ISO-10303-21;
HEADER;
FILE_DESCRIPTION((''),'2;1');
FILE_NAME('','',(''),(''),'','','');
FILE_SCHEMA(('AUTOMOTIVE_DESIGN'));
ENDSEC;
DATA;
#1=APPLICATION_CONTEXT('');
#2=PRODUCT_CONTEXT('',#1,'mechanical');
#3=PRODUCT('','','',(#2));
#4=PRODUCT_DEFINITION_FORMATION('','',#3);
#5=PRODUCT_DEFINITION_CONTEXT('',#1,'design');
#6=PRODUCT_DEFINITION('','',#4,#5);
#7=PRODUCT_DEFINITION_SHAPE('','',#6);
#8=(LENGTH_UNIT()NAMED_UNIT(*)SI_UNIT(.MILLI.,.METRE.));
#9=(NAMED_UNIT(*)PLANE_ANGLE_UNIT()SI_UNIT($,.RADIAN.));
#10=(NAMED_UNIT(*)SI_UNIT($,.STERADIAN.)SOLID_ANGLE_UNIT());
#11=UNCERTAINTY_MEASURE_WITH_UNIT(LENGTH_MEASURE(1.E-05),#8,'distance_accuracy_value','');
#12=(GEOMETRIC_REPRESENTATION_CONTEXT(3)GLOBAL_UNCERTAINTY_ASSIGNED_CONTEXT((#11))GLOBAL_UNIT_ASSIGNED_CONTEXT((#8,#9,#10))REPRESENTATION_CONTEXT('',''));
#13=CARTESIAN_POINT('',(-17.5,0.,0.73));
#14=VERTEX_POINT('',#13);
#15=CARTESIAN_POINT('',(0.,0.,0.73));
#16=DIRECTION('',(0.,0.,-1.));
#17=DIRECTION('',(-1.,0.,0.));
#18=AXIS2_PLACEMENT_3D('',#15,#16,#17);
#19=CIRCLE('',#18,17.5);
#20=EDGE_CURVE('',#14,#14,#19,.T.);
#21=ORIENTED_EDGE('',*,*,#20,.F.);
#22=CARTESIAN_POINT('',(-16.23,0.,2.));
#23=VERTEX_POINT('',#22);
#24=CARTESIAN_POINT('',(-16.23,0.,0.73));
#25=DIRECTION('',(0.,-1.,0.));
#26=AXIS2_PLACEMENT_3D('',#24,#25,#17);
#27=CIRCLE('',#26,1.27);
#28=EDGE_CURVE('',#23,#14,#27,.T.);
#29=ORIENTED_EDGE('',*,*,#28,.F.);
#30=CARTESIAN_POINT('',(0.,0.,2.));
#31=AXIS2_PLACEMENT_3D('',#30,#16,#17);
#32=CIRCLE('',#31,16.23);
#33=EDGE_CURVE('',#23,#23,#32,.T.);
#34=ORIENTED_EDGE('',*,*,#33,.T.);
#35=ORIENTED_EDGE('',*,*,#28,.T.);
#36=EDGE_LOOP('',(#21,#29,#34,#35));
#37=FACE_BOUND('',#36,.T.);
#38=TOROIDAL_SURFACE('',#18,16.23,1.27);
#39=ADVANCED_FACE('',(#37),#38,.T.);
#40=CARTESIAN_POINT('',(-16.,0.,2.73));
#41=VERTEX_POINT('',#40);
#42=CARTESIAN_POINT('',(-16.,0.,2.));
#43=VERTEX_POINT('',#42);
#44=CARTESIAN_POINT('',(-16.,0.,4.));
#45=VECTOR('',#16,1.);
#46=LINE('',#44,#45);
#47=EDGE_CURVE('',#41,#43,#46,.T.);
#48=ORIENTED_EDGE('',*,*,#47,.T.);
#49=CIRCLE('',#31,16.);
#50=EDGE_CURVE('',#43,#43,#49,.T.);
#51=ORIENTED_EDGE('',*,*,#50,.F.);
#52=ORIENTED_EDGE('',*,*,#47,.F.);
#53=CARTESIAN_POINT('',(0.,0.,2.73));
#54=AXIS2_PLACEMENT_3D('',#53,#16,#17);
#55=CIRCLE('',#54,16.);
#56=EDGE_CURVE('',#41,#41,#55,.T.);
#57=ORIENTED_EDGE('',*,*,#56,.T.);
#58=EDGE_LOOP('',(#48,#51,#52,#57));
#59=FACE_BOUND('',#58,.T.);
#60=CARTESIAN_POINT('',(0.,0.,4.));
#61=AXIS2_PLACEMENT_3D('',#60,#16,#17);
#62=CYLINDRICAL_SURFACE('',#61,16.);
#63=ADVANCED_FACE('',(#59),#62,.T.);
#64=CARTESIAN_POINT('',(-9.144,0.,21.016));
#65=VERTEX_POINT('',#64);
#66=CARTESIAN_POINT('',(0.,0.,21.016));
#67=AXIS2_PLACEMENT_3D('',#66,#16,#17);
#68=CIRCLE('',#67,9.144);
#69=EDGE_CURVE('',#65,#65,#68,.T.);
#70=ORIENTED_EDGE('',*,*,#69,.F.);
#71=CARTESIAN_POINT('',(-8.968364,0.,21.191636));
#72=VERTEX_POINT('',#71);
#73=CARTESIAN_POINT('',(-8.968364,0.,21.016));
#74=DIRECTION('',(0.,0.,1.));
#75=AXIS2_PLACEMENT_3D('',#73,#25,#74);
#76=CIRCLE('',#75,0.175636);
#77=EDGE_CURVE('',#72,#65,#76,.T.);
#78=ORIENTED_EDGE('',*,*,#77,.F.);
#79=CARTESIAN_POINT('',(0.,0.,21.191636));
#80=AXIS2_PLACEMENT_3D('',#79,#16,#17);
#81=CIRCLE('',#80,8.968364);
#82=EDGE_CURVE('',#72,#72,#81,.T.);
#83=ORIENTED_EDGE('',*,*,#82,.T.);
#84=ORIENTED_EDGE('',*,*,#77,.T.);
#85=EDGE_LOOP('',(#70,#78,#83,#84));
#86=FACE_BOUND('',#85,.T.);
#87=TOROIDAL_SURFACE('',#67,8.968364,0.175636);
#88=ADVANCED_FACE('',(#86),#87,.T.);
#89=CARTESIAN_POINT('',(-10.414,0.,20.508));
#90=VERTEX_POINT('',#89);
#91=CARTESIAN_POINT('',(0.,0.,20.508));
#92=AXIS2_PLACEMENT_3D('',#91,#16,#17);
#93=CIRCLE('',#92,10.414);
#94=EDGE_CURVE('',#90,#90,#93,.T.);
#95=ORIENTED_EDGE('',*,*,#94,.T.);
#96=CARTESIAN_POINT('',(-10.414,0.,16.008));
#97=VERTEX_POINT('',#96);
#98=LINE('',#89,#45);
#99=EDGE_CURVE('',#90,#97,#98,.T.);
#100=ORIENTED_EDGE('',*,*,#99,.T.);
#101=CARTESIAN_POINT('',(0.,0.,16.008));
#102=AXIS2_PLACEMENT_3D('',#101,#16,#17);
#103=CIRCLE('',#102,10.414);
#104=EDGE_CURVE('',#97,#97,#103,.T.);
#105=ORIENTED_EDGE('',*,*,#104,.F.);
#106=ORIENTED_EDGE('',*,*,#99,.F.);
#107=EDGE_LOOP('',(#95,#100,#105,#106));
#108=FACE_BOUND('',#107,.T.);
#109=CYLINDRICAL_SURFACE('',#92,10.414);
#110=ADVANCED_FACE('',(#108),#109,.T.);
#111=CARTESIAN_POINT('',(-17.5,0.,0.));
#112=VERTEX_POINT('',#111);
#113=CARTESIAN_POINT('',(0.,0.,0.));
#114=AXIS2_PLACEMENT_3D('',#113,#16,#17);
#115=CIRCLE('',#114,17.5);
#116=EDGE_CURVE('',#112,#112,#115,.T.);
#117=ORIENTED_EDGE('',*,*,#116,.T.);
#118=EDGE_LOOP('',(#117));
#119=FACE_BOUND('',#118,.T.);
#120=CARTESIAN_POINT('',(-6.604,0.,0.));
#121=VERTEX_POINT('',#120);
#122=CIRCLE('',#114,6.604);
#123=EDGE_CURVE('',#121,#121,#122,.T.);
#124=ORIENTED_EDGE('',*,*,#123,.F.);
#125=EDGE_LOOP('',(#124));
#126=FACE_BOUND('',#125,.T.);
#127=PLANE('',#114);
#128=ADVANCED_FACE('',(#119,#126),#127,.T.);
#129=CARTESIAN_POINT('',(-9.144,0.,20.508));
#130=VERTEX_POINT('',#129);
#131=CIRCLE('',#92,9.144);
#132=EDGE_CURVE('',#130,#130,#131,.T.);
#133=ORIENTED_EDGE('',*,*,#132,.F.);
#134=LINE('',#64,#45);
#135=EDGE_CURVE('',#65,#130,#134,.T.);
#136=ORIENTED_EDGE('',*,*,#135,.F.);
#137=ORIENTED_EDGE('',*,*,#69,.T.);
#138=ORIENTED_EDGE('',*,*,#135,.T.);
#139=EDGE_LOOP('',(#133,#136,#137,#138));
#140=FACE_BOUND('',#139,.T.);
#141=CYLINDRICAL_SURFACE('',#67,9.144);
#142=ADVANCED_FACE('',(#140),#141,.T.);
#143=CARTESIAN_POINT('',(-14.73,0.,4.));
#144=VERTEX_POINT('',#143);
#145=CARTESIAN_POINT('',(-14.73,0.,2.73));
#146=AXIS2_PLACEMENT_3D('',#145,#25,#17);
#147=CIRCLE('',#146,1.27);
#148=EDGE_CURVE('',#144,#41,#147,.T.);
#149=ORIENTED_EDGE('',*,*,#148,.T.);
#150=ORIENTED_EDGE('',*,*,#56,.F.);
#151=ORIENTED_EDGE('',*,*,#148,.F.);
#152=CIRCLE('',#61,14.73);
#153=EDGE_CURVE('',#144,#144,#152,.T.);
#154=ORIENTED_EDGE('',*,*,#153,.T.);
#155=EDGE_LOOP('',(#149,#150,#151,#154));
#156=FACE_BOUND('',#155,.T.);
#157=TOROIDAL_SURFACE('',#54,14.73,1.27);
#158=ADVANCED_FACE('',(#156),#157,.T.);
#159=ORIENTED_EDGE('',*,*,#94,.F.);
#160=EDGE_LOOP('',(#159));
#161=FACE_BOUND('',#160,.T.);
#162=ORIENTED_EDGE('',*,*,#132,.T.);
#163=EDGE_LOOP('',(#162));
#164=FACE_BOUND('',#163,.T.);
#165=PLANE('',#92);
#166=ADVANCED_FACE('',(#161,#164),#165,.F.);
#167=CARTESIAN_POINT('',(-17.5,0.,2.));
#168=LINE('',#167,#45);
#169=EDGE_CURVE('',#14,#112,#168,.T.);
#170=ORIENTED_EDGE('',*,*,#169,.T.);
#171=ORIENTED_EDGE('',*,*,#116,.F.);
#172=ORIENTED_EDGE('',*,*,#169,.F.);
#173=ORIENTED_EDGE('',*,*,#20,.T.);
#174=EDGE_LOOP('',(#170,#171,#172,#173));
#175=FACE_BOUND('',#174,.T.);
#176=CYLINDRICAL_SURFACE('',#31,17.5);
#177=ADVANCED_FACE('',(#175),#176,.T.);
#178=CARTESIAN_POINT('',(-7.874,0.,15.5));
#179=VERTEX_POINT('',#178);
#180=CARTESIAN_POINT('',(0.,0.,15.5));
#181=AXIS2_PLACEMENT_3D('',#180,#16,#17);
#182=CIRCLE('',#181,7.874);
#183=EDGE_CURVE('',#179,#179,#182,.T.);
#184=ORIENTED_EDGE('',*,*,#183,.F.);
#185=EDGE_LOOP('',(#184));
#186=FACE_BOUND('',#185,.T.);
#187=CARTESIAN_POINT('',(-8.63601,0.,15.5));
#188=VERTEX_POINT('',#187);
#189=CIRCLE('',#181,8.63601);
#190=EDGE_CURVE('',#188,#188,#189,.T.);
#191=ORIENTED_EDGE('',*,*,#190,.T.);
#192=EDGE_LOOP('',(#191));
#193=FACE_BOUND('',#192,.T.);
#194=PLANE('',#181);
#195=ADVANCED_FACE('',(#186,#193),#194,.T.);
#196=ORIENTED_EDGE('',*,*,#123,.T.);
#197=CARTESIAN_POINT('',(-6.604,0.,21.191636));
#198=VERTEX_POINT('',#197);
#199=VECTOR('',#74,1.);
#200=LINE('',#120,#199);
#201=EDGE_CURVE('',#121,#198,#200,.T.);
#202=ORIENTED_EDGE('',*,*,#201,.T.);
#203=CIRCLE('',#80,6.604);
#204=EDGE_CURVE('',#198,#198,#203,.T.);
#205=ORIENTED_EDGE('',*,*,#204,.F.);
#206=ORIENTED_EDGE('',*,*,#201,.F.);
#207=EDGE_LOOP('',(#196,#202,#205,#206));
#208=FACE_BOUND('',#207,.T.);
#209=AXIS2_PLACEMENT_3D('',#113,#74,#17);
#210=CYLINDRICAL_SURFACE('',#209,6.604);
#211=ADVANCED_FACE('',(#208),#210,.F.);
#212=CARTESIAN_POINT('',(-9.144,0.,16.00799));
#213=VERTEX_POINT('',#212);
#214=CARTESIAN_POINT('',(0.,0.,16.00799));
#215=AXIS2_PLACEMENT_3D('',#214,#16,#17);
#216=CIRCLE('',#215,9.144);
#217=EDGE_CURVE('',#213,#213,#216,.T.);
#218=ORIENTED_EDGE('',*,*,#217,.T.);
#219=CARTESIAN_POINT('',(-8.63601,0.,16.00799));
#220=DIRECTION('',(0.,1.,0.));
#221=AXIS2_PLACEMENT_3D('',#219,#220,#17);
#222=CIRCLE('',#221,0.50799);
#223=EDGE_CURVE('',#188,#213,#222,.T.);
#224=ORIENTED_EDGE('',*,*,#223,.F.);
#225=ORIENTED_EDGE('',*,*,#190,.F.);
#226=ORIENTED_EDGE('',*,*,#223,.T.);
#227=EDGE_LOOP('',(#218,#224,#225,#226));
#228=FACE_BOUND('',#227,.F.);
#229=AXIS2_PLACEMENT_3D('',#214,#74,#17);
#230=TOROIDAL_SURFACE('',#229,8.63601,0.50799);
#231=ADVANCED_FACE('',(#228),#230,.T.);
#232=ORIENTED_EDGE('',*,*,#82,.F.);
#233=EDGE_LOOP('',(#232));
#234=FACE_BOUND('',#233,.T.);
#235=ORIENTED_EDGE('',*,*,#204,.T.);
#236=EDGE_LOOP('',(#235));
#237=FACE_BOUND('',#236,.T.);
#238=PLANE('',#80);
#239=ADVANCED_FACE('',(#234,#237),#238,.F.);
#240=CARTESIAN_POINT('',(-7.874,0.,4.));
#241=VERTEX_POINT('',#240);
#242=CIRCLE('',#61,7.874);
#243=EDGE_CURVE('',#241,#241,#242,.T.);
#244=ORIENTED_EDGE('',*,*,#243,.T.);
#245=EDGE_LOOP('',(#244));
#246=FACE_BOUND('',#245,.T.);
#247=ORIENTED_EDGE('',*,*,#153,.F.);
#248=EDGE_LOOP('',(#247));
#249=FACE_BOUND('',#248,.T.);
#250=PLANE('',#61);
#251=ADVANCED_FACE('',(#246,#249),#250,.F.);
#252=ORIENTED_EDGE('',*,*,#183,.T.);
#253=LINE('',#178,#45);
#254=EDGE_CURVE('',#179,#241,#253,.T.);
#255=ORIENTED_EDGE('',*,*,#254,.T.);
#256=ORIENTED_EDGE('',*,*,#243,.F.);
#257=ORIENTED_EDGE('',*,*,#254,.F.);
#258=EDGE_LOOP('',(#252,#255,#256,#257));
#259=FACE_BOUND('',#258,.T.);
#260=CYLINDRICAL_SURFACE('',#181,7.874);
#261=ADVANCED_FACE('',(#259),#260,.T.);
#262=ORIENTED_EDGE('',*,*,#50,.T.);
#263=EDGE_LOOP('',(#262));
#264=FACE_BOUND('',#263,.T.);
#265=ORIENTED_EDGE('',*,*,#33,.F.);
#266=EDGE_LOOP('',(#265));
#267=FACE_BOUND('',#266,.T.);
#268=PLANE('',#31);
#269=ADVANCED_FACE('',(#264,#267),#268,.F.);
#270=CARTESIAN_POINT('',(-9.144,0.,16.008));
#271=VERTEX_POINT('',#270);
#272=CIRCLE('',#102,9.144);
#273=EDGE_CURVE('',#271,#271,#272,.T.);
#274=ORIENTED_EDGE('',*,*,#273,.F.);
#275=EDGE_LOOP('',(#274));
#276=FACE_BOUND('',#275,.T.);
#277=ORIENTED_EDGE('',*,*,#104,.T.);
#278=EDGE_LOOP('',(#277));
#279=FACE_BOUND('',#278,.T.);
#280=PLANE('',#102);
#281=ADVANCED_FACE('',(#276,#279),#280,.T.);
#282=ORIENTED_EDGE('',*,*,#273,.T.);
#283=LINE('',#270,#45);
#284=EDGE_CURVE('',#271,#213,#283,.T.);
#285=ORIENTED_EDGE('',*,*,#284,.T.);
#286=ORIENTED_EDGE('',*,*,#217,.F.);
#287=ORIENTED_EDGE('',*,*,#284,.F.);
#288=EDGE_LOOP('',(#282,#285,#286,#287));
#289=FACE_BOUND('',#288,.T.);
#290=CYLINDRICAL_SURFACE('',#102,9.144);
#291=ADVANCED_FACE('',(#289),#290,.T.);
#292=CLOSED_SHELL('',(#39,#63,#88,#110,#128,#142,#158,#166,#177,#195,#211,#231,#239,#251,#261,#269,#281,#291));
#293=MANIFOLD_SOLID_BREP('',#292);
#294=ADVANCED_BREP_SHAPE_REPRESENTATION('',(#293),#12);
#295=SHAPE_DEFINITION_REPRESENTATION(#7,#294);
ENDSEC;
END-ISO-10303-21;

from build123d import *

# Parameters (mm, degrees)
F2_R = 1.27
F3_R = 0.50799


# Not quite as in the source:
# - a fillet or chamfer is up to 0.001 mm smaller than in the source, because OpenCascade refuses the exact size


with BuildPart() as f1:
    # F0 (on Front) → F1 (revolve)
    with BuildSketch(Plane.XZ):
        with BuildLine():
            Line((-17.5, 0), (-6.604, 0))
            Line((-6.604, 0), (-6.604, 21.1916357695))
            Line((-6.604, 21.1916357695), (-8.9683642305, 21.1916357695))
            ThreePointArc((-8.9683642305, 21.1916357695), (-9.0925574741, 21.1401932437), (-9.144, 21.016))
            Line((-9.144, 21.016), (-9.144, 20.508))
            Line((-9.144, 20.508), (-10.414, 20.508))
            Line((-10.414, 20.508), (-10.414, 16.008))
            Line((-10.414, 16.008), (-9.144, 16.008))
            Line((-9.144, 16.008), (-9.144, 15.5))
            Line((-9.144, 15.5), (-7.874, 15.5))
            Line((-7.874, 15.5), (-7.874, 4))
            Line((-7.874, 4), (-16, 4))
            Line((-16, 4), (-16, 2))
            Line((-16, 2), (-17.5, 2))
            Line((-17.5, 2), (-17.5, 0))
        make_face()
    revolve(axis=Axis((0, 0, 10.5958178848), (0, 0, -1)))

    # F2
    f2_edges = [f1.edges().sort_by_distance(p)[0] for p in [
        (16, 0, 4),
        (17.5, 0, 2),
    ]]
    fillet(f2_edges, radius=F2_R)

    # F3 (radius 0.508 in the source; OpenCascade refuses exactly that, so slightly less here)
    f3_edges = [f1.edges().sort_by_distance(p)[0] for p in [
        (9.144, 0, 15.5),
    ]]
    fillet(f3_edges, radius=F3_R)


solid = f1.part
